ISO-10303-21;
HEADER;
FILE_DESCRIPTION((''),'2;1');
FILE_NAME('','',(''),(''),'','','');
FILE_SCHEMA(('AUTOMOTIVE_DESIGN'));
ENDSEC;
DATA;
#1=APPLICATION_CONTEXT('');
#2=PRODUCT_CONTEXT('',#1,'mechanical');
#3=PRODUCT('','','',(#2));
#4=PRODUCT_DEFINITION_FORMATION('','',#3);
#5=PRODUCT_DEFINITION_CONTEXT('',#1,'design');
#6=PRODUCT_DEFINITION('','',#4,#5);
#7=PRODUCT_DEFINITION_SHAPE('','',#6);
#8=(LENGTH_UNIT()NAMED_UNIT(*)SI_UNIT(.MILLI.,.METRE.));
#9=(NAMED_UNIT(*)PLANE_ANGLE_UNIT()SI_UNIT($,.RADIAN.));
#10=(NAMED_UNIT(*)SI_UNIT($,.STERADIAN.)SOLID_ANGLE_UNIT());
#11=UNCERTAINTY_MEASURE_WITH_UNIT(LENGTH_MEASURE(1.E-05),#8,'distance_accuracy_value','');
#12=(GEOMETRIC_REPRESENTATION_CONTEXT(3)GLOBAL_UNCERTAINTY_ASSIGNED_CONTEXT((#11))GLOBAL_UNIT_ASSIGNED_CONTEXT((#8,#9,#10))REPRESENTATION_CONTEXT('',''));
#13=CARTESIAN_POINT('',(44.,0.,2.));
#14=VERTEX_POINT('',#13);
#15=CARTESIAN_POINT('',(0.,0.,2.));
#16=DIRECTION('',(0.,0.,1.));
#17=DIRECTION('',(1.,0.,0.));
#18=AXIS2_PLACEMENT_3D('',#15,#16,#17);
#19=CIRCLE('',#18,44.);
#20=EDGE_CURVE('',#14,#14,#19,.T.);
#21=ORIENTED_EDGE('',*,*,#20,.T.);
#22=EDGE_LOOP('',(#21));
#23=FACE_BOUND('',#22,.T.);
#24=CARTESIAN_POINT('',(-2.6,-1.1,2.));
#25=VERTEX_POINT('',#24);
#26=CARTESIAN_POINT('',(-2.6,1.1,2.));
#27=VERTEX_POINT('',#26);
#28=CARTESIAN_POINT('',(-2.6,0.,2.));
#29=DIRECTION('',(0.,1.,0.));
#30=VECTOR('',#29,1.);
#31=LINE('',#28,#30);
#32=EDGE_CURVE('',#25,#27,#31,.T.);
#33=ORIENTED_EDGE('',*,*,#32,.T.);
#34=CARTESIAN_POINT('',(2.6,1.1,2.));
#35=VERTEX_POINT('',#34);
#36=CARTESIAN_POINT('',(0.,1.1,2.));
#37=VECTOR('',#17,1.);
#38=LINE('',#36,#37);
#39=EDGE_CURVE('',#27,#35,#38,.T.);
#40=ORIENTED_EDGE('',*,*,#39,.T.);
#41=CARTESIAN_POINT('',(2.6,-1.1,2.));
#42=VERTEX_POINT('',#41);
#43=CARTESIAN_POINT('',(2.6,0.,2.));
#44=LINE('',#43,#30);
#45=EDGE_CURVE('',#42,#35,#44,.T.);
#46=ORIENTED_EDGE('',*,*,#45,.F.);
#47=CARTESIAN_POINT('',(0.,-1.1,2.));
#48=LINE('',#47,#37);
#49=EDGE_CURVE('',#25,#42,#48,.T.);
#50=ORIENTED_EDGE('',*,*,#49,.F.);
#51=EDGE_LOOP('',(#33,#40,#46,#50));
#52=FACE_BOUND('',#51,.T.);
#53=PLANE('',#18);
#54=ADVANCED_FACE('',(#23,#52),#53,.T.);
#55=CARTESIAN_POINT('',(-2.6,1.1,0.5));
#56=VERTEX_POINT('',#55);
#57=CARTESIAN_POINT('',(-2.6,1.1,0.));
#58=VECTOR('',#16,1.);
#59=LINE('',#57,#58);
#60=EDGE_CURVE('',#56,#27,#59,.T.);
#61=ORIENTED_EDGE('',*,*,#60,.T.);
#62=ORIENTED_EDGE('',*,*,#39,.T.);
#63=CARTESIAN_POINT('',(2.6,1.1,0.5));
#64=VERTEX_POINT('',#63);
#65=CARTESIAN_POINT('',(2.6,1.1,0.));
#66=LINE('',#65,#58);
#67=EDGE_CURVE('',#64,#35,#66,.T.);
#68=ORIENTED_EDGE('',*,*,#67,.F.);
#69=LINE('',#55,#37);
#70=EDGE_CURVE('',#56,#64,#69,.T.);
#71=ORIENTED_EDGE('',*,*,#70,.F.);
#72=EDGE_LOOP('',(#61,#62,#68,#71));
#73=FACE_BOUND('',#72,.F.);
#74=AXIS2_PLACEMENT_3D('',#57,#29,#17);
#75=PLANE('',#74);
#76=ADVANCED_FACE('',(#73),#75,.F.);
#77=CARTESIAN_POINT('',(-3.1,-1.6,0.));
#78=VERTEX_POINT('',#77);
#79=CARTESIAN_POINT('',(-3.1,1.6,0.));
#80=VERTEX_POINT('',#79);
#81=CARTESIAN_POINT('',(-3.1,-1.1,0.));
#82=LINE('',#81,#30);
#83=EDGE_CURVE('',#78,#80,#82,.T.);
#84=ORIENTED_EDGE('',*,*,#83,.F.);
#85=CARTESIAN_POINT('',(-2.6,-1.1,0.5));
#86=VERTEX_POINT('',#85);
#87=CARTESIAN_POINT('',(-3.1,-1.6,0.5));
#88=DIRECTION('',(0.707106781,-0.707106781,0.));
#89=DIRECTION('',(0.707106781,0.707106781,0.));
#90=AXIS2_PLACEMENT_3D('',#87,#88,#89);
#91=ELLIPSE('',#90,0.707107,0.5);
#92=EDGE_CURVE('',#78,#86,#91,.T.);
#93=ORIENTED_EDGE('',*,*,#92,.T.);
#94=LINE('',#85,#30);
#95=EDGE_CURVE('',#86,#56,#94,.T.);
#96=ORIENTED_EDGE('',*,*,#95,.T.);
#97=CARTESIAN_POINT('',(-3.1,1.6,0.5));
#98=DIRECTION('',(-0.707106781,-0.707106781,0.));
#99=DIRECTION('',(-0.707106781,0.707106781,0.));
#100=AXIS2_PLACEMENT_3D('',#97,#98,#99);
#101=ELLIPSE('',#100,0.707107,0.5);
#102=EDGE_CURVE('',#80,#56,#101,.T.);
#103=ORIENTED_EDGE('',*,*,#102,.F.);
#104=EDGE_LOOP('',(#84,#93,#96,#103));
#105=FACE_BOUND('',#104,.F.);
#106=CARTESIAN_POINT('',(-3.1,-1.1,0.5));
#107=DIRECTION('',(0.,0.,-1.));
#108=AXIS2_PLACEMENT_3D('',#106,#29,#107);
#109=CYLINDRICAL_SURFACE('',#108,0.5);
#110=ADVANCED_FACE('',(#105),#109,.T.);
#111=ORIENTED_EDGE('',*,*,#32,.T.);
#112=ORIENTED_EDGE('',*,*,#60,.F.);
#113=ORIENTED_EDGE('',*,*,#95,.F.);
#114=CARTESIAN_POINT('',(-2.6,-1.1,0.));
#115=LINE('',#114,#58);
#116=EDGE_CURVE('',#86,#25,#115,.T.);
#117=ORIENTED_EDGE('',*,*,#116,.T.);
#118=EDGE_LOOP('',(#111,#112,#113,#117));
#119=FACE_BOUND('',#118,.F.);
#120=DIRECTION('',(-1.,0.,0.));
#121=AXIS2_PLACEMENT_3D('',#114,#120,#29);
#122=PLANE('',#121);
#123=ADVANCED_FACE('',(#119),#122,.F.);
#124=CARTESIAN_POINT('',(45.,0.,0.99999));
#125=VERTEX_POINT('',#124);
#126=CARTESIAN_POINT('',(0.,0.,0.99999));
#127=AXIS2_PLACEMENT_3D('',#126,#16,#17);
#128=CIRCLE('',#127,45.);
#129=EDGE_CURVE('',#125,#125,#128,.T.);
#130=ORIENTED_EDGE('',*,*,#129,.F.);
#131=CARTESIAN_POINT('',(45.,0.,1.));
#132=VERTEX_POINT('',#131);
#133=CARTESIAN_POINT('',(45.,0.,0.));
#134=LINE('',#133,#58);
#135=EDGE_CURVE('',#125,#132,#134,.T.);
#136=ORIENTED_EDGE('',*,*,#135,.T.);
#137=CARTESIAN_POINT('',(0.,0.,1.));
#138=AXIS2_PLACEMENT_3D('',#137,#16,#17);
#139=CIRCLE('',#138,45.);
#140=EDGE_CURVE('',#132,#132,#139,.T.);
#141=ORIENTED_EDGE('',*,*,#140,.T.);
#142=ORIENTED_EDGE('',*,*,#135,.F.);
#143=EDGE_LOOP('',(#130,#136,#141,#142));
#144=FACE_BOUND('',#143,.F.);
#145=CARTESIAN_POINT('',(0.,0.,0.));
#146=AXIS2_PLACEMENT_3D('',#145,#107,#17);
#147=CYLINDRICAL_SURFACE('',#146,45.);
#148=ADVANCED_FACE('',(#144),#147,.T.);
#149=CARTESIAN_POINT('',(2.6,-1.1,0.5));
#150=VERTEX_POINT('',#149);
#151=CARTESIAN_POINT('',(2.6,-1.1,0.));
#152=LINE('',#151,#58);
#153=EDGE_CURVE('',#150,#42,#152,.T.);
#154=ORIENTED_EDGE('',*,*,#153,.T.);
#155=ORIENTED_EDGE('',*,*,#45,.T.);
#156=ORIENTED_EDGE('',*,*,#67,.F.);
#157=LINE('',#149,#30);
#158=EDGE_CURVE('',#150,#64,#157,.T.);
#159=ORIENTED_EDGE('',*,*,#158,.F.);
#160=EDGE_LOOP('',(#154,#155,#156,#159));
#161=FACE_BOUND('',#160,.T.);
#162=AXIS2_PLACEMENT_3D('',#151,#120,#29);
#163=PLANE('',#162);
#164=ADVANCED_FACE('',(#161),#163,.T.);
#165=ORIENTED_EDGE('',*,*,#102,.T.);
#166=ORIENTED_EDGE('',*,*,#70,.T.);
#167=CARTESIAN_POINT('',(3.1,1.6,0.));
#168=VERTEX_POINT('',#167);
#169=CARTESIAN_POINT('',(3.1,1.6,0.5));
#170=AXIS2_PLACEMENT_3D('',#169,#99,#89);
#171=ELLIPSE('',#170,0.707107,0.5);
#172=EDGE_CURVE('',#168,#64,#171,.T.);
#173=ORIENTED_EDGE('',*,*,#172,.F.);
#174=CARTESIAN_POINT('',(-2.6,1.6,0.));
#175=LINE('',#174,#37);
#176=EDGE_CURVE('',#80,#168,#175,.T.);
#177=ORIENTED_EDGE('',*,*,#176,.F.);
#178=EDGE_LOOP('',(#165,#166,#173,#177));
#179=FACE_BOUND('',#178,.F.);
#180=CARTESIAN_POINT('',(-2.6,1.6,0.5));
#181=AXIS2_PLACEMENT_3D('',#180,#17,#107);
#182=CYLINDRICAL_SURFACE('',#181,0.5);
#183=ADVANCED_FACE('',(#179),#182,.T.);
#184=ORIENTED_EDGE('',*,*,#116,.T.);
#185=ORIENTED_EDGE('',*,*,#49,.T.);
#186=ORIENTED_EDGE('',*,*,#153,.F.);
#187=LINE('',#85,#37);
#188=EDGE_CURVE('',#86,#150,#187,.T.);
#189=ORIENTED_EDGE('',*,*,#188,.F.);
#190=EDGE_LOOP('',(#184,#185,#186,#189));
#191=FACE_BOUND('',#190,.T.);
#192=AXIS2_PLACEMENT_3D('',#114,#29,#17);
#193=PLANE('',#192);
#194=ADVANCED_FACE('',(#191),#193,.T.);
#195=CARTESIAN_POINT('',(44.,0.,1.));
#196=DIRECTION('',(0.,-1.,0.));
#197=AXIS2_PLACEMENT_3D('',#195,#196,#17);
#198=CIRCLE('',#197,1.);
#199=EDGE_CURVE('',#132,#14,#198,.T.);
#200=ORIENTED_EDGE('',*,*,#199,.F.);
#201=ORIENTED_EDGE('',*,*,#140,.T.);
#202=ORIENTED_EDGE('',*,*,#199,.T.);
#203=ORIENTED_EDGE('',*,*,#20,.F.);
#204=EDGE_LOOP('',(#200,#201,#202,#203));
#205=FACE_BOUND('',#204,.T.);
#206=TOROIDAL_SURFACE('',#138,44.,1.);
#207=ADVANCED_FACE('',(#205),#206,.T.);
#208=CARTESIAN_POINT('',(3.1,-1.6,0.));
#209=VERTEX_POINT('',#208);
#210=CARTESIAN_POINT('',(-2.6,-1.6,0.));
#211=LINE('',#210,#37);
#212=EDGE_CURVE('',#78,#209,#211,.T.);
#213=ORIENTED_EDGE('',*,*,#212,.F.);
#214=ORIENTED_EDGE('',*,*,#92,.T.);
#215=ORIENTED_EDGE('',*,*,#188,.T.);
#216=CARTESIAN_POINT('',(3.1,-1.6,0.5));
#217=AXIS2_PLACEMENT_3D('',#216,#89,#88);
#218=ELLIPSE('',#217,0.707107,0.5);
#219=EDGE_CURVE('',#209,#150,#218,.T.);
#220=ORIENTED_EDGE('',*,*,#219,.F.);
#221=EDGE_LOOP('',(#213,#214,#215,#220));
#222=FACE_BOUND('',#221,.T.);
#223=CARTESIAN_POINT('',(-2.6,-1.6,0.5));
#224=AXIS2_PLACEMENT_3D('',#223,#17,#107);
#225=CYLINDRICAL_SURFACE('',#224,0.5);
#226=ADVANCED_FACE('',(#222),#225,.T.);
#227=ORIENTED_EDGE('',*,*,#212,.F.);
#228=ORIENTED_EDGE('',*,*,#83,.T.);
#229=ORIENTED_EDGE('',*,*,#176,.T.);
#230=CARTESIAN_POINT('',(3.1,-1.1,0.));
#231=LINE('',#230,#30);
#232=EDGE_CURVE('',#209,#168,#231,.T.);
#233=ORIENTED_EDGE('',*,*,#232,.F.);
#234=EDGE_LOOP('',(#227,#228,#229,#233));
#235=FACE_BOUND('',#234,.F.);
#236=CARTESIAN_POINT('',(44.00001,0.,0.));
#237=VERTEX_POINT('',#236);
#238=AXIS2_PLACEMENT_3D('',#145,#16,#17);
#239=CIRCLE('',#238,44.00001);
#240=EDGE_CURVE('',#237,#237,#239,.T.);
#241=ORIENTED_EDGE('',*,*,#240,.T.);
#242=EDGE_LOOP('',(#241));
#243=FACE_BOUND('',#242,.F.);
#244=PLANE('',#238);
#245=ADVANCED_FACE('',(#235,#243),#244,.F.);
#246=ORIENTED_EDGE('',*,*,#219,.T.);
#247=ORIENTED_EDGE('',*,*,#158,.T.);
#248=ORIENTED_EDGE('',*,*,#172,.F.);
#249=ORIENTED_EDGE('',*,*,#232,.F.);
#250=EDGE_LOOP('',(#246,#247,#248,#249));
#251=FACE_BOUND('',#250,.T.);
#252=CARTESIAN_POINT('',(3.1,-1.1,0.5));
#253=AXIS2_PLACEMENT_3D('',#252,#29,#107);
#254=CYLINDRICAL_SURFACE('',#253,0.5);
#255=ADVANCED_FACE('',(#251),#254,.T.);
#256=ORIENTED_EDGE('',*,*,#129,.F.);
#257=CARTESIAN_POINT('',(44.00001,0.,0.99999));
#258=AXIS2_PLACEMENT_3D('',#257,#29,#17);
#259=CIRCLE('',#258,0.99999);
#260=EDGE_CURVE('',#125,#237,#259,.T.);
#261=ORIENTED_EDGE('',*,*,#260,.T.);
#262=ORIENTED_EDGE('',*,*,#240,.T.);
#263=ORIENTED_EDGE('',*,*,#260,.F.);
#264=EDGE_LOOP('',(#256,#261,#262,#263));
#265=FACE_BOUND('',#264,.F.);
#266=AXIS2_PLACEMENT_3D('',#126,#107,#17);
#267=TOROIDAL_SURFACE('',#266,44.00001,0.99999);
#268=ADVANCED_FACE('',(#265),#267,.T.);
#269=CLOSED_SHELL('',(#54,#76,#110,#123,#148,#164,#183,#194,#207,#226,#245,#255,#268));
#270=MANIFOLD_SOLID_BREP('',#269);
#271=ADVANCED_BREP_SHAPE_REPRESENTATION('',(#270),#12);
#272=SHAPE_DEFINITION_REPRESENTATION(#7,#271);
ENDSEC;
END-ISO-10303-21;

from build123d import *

# Parameters (mm, degrees)
F0_R     = 45
F0_W     = 5.2
F0_H     = 2.2
F1_DEPTH = 2
F2_R     = 1
F3_R     = 0.99999
F4_R     = 0.5


# Not quite as in the source:
# - a fillet or chamfer is up to 0.001 mm smaller than in the source, because OpenCascade refuses the exact size


with BuildPart() as f1:
    # F0 (on Top) → F1 (new body)
    with BuildSketch(Plane.XY):
        Circle(F0_R)
        Rectangle(F0_W, F0_H, mode=Mode.SUBTRACT)
    extrude(amount=F1_DEPTH)

    # F2
    f2_edges = [f1.edges().sort_by_distance(p)[0] for p in [
        (-45, 0, 2),
    ]]
    fillet(f2_edges, radius=F2_R)

    # F3 (radius 1 in the source; OpenCascade refuses exactly that, so slightly less here)
    f3_edges = [f1.edges().sort_by_distance(p)[0] for p in [
        (-45, 0, 0),
    ]]
    fillet(f3_edges, radius=F3_R)

    # F4
    f4_edges = [f1.edges().sort_by_distance(p)[0] for p in [
        (-2.6, 0, 0),
        (0, -1.1, 0),
        (2.6, 0, 0),
        (0, 1.1, 0),
    ]]
    fillet(f4_edges, radius=F4_R)


solid = f1.part
